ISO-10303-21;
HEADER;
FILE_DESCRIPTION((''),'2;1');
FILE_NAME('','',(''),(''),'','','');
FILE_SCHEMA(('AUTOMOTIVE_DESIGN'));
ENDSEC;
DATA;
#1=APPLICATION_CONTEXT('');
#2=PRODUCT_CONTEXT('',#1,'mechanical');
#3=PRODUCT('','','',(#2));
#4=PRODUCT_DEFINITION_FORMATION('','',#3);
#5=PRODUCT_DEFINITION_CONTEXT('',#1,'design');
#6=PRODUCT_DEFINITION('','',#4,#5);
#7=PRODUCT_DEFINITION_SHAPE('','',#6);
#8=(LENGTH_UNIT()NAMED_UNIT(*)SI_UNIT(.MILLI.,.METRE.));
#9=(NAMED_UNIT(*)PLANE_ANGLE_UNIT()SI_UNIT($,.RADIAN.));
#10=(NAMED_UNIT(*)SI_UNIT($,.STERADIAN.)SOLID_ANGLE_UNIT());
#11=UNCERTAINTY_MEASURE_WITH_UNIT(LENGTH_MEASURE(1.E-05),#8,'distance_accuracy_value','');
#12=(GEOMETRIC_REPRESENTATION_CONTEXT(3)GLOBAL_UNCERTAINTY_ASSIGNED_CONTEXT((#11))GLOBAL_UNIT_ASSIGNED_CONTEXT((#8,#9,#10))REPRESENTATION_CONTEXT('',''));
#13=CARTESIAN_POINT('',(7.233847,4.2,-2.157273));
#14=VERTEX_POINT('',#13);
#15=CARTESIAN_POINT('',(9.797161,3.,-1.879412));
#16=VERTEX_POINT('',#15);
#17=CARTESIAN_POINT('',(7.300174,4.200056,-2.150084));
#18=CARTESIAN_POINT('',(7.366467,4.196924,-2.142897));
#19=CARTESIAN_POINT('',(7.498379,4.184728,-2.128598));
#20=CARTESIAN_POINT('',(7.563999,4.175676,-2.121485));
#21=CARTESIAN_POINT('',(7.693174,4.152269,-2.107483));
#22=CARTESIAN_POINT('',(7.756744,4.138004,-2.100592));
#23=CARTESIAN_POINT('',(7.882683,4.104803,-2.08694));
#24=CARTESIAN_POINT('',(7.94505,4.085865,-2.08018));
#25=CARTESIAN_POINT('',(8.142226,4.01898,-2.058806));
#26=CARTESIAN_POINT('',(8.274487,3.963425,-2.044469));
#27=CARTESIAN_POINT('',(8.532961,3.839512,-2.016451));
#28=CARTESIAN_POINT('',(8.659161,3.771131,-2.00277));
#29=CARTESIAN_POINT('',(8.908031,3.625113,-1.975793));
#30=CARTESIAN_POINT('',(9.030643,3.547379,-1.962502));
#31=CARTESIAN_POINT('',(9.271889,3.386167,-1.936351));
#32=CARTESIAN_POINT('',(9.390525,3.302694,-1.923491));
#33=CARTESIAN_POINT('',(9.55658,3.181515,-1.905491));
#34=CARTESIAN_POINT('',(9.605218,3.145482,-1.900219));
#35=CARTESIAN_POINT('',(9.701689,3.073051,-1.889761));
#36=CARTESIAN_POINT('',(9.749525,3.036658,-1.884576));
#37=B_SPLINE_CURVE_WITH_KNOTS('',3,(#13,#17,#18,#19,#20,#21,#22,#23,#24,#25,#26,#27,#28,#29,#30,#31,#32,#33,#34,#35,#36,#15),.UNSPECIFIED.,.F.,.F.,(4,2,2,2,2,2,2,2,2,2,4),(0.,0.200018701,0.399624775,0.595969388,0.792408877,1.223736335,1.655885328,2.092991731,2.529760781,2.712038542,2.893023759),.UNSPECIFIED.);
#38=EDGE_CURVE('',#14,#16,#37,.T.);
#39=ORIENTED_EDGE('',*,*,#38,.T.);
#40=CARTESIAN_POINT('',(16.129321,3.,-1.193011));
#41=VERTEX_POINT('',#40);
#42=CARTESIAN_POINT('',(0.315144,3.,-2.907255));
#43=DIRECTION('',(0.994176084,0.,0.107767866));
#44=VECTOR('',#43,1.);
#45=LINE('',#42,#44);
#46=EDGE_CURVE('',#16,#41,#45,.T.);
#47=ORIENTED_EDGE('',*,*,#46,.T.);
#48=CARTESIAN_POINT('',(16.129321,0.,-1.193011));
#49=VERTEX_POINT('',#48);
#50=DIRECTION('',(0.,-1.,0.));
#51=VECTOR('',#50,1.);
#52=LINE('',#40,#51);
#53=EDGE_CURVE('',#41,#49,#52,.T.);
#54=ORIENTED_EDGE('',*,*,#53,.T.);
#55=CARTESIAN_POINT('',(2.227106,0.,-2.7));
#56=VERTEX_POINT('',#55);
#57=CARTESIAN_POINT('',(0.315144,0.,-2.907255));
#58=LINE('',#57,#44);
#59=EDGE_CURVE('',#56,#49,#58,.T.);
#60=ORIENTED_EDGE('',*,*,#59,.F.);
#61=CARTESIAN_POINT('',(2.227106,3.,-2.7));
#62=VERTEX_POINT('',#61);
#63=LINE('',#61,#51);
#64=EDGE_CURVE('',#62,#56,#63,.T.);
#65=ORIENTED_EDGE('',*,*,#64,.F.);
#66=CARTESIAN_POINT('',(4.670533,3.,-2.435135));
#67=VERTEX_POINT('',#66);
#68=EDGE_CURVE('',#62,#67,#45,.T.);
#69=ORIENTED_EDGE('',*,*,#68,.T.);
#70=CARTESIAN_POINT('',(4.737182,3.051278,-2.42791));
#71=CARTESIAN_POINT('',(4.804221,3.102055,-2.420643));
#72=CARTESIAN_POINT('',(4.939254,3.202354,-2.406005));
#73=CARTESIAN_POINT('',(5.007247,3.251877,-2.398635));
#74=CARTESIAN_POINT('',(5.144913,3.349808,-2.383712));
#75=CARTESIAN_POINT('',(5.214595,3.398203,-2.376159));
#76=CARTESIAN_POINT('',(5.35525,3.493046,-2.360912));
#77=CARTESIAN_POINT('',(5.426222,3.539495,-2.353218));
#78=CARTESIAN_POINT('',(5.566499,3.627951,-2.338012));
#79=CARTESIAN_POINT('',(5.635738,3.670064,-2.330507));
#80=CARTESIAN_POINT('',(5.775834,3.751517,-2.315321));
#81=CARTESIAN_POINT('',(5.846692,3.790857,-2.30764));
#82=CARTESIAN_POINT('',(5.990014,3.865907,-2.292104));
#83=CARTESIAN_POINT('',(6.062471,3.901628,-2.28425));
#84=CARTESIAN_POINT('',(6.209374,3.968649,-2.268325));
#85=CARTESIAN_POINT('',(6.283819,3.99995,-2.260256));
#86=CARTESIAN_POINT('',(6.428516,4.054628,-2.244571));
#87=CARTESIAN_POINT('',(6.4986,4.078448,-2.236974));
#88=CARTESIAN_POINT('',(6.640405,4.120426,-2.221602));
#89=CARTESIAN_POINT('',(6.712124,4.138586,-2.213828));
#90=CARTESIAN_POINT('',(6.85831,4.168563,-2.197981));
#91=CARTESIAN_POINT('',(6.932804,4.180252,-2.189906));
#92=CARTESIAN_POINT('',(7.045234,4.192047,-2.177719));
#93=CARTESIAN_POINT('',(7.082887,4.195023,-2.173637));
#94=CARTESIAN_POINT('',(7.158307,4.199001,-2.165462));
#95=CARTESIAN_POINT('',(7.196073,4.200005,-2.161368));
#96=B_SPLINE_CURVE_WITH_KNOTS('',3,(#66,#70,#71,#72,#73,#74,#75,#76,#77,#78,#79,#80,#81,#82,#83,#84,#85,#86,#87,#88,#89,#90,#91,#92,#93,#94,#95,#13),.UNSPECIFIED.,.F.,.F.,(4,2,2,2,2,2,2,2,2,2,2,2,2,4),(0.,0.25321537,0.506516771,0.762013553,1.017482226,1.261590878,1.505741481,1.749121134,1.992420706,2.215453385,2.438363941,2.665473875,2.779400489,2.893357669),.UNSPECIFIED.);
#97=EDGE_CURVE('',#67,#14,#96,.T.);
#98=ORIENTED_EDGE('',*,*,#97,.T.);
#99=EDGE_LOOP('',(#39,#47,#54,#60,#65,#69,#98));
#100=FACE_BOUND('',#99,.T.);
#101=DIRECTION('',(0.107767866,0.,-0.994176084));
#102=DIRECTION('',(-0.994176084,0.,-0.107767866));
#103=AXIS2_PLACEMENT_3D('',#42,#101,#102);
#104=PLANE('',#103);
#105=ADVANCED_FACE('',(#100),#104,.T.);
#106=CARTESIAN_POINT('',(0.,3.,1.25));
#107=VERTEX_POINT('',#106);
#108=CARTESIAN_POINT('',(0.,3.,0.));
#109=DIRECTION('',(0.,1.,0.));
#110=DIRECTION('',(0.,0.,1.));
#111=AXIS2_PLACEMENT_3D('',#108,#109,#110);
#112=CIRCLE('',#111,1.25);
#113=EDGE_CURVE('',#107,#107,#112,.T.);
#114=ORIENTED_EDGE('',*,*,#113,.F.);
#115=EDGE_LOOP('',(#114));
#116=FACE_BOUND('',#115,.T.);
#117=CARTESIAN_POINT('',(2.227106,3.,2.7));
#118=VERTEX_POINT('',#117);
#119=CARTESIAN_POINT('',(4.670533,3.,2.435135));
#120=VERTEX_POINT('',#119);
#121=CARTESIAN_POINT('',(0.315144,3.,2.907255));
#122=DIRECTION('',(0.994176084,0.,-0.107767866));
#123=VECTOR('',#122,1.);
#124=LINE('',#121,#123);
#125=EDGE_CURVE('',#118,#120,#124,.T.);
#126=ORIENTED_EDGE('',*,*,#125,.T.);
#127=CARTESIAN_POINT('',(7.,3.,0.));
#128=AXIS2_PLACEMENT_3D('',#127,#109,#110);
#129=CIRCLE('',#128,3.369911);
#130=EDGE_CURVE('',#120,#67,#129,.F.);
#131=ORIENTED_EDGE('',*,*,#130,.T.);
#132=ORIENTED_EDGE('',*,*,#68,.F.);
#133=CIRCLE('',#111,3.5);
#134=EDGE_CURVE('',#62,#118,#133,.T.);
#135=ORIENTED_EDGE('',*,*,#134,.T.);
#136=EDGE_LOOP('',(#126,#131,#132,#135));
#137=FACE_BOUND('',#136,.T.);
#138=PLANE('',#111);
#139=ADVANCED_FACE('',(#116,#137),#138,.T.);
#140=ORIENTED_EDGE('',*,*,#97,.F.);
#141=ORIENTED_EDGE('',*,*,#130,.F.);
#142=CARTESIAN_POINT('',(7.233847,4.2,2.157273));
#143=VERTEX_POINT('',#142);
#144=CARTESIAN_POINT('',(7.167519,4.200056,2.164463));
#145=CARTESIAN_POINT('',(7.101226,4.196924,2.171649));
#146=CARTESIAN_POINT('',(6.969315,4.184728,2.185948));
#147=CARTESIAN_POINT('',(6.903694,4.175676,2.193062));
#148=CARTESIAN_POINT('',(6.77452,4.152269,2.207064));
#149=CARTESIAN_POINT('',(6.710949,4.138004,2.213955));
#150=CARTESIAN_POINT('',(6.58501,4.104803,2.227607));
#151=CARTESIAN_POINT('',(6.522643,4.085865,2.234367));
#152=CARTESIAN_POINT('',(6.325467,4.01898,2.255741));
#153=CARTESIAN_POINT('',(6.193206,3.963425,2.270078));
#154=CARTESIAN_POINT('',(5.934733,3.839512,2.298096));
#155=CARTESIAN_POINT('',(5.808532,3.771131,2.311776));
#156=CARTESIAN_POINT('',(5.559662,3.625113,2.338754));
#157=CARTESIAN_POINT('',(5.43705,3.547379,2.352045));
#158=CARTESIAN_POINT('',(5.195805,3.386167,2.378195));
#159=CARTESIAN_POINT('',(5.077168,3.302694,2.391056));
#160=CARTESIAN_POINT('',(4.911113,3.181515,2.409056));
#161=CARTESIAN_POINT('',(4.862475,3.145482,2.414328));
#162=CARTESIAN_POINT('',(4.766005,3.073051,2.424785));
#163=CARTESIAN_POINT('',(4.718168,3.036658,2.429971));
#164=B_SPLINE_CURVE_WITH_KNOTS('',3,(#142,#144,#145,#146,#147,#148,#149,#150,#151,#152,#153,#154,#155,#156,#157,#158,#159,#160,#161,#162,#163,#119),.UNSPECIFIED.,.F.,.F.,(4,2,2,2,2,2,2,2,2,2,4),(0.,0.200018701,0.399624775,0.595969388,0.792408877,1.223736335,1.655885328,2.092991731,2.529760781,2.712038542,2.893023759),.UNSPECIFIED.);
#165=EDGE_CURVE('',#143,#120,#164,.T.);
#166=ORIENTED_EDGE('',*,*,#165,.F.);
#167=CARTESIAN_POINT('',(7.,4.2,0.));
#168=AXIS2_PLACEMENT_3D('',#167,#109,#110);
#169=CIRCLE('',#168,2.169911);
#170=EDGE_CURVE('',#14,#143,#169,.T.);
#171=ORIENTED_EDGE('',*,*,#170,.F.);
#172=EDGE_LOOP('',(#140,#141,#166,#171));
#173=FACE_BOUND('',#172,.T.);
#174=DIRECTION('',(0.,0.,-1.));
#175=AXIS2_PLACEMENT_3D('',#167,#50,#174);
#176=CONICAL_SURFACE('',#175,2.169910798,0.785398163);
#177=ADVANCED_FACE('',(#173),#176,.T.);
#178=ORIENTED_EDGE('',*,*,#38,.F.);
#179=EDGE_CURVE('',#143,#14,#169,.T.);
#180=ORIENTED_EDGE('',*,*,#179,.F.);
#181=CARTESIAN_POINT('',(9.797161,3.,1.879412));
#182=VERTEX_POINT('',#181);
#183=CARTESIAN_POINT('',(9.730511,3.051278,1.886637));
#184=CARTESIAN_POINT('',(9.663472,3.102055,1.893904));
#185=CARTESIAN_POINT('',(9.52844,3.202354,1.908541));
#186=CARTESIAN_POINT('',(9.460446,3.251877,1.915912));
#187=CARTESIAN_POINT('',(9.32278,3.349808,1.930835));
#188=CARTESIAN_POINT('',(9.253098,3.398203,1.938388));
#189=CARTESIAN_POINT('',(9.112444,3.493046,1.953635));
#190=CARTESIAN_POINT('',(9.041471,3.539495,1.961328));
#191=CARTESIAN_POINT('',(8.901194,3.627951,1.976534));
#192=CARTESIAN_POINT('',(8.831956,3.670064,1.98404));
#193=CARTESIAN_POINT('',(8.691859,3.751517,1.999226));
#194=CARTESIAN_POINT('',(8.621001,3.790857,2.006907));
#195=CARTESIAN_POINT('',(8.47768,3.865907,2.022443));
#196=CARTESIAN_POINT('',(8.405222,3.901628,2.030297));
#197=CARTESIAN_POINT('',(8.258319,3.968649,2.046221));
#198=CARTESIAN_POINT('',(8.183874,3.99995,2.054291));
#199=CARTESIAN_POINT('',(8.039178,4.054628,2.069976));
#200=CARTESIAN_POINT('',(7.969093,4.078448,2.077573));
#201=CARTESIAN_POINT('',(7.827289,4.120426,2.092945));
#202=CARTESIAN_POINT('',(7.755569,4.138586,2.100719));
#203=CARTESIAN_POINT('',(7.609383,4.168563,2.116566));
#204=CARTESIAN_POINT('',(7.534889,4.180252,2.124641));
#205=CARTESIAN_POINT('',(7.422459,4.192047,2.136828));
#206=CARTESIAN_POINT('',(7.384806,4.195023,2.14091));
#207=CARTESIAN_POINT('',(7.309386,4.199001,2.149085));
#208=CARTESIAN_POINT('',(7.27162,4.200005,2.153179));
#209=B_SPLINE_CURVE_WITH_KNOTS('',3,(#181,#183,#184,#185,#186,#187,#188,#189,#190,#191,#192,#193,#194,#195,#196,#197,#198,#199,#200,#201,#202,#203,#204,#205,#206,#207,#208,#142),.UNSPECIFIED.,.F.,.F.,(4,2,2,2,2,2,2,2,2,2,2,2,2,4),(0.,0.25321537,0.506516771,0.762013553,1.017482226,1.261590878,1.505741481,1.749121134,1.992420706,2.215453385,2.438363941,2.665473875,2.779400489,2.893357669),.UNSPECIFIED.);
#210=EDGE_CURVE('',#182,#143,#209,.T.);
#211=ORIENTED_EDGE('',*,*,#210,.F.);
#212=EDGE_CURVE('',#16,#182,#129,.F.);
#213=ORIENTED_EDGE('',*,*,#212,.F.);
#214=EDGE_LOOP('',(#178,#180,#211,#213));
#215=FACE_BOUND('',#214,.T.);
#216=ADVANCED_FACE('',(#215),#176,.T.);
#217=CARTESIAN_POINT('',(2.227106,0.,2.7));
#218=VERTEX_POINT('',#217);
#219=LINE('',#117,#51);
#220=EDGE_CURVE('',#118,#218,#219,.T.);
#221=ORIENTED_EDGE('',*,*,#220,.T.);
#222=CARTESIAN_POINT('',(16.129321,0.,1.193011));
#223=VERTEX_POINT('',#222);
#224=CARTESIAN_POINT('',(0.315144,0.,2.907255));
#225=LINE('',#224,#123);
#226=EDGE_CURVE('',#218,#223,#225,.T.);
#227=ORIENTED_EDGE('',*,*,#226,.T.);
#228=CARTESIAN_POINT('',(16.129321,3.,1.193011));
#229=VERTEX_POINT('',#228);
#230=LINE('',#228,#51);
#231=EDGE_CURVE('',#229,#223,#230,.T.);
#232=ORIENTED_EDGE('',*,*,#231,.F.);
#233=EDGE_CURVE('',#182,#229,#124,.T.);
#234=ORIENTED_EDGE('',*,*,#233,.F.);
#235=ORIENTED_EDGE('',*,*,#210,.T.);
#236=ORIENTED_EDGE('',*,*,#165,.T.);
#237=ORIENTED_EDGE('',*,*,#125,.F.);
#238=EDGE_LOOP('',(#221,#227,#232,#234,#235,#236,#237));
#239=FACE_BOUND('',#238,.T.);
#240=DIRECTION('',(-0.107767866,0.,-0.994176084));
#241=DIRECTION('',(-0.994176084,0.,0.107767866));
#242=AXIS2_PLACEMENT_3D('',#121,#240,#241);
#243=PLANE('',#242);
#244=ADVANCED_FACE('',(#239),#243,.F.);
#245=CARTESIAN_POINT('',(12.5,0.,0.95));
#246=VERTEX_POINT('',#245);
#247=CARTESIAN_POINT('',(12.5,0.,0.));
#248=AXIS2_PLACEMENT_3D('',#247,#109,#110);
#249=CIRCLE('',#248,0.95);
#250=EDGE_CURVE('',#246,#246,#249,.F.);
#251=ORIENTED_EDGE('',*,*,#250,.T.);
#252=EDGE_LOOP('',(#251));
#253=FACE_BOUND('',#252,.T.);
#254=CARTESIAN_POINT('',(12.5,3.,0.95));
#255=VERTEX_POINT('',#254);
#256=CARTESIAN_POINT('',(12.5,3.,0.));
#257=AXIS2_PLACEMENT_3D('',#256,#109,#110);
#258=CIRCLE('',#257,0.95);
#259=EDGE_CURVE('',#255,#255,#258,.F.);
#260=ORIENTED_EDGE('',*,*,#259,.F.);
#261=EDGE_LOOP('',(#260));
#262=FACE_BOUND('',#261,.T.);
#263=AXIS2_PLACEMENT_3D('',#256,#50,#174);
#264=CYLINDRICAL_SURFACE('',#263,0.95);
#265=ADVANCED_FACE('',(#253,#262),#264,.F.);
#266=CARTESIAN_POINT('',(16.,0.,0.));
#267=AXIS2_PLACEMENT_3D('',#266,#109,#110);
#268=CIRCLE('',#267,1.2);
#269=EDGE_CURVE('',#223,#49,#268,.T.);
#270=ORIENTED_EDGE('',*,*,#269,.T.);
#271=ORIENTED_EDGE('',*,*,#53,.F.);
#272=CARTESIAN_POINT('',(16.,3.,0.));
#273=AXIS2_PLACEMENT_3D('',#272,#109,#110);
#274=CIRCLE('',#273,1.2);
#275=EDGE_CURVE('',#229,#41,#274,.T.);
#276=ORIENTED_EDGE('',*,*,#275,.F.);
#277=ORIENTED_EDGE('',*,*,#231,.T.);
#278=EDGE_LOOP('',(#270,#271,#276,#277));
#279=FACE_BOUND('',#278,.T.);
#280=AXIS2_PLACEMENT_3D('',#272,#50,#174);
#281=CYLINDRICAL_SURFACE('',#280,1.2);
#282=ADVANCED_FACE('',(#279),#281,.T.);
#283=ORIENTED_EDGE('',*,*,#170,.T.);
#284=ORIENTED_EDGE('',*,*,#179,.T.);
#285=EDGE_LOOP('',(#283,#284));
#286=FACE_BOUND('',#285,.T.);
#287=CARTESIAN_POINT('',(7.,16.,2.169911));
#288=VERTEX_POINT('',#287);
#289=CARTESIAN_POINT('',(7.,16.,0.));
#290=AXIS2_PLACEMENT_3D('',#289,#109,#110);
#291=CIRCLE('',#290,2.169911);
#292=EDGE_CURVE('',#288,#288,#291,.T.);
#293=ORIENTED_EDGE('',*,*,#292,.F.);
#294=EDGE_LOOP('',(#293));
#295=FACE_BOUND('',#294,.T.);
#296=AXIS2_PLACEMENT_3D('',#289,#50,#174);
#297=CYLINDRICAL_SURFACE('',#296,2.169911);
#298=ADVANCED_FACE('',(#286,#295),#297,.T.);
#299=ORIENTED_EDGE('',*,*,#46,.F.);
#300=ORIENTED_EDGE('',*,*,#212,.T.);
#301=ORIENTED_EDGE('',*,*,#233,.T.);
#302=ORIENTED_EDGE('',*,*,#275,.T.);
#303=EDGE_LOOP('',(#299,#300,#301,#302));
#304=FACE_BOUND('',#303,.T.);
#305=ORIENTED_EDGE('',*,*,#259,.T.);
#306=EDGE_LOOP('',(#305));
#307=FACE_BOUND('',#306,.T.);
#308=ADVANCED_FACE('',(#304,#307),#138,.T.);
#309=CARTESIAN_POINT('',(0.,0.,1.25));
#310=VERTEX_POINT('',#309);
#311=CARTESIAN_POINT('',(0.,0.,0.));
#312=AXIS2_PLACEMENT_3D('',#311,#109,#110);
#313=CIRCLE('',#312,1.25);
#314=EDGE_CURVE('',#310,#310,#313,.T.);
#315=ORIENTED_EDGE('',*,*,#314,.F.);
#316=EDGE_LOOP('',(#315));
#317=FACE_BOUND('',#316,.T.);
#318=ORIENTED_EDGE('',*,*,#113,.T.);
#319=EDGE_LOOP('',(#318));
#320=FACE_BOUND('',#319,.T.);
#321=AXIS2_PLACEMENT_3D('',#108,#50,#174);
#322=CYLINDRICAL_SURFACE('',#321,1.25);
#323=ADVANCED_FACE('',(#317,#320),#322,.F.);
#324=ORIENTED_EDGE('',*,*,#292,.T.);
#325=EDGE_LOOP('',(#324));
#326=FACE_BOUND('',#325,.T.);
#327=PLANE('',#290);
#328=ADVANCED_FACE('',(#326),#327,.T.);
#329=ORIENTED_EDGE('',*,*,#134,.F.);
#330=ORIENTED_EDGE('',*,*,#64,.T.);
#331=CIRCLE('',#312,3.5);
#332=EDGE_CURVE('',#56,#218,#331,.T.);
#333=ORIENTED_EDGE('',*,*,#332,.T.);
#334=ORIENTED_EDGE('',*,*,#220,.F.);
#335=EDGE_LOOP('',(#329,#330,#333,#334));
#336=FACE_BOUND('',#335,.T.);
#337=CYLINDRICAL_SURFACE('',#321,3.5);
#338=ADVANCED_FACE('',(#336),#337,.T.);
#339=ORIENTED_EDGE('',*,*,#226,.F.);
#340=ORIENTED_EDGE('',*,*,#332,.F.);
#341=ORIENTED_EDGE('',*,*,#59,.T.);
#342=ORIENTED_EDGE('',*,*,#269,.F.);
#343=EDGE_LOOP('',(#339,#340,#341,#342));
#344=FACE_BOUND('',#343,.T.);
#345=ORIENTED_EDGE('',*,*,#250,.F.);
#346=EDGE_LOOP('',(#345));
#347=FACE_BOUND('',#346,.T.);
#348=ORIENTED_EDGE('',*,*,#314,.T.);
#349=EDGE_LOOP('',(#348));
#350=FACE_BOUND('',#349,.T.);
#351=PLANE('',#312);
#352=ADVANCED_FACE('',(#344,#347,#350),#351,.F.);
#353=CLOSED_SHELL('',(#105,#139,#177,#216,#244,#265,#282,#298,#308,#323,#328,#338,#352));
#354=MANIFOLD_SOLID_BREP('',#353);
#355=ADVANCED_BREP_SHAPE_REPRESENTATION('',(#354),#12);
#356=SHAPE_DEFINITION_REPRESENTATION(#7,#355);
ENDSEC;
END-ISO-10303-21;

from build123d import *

# Parameters (mm, degrees)
SKETCH1_R           = 0.95
SKETCH1_R_2         = 1.25
BOSS_EXTRUDE1_DEPTH = 3
SKETCH2_R           = 2.169910798
BOSS_EXTRUDE2_DEPTH = 13
CHAMFER1_SIZE       = 1.2


with BuildPart() as part:
    # Sketch1 → Boss-Extrude1 (new body)
    with BuildSketch(Plane(origin=(0, 0, 0), x_dir=(1, 0, 0), z_dir=(0, 1, 0))):
        with BuildLine():
            ThreePointArc((2.227105745, 2.7), (-3.5, 0), (2.227105745, -2.7))
            Line((2.227105745, -2.7), (16.12932144, -1.193011301))
            ThreePointArc((16.12932144, -1.193011301), (17.2, 0), (16.12932144, 1.193011301))
            Line((16.12932144, 1.193011301), (2.227105745, 2.7))
        make_face()
        with Locations(Location((12.5, 0, 0), (0, 0, 270))):
            Circle(SKETCH1_R, mode=Mode.SUBTRACT)
        with Locations(Location((0, 0, 0), (0, 0, 270))):
            Circle(SKETCH1_R_2, mode=Mode.SUBTRACT)
    extrude(amount=BOSS_EXTRUDE1_DEPTH)

    # Sketch2 → Boss-Extrude2 (add)
    with BuildSketch(Plane(origin=(0, 3, 0), x_dir=(1, 0, 0), z_dir=(0, 1, 0))):
        with Locations(Location((7, 0, 0), (0, 0, 83.813341225))):
            Circle(SKETCH2_R)
    extrude(amount=BOSS_EXTRUDE2_DEPTH)

    # Chamfer1
    # the kernel refuses this chamfer: 1.2 mm, written as the material it adds along each edge
    with BuildSketch(Plane(origin=(7, 3, 0), x_dir=(0.1077678664159532, 0, -0.9941760844881318), z_dir=(0.9941760844881318, 0, 0.1077678664159532))) as chamfer1_piece_1_section:
        Polygon((2.169910798 + CHAMFER1_SIZE, 0), (2.169910798, CHAMFER1_SIZE), (2.169910798, 0), align=None)
    chamfer1_piece_1 = revolve(axis=Axis((7, 3, 0), (0, 1, 0)), revolution_arc=192.373317929, mode=Mode.PRIVATE)
    chamfer1_piece_1 = split(chamfer1_piece_1, bisect_by=Plane(origin=(4.507411797, 3.588560711, 2.452816707), z_dir=(-0.10776786640872232, 0, -0.9941760844889158)), keep=Keep.TOP, mode=Mode.PRIVATE)
    chamfer1_piece_1 = split(chamfer1_piece_1, bisect_by=Plane(origin=(4.507411799, 3.588560711, -2.452816707), z_dir=(-0.10776786640872232, 0, 0.9941760844889158)), keep=Keep.TOP, mode=Mode.PRIVATE)
    add(chamfer1_piece_1)
    with BuildSketch(Plane(origin=(7, 3, 0), x_dir=(0.1077678729849121, 0, 0.9941760837760621), z_dir=(-0.9941760837760621, 0, 0.1077678729849121))) as chamfer1_piece_2_section:
        Polygon((2.169910798 + CHAMFER1_SIZE, 0), (2.169910798, CHAMFER1_SIZE), (2.169910798, 0), align=None)
    chamfer1_piece_2 = revolve(axis=Axis((7, 3, 0), (0, 1, 0)), revolution_arc=167.626682071, mode=Mode.PRIVATE)
    chamfer1_piece_2 = split(chamfer1_piece_2, bisect_by=Plane(origin=(9.961043045, 3.589331186, 1.861647585), z_dir=(-0.10776786640872232, 0, -0.9941760844889158)), keep=Keep.TOP, mode=Mode.PRIVATE)
    chamfer1_piece_2 = split(chamfer1_piece_2, bisect_by=Plane(origin=(9.961043043, 3.589331186, -1.861647585), z_dir=(-0.10776786640872232, 0, 0.9941760844889158)), keep=Keep.TOP, mode=Mode.PRIVATE)
    add(chamfer1_piece_2)


solid = part.part
